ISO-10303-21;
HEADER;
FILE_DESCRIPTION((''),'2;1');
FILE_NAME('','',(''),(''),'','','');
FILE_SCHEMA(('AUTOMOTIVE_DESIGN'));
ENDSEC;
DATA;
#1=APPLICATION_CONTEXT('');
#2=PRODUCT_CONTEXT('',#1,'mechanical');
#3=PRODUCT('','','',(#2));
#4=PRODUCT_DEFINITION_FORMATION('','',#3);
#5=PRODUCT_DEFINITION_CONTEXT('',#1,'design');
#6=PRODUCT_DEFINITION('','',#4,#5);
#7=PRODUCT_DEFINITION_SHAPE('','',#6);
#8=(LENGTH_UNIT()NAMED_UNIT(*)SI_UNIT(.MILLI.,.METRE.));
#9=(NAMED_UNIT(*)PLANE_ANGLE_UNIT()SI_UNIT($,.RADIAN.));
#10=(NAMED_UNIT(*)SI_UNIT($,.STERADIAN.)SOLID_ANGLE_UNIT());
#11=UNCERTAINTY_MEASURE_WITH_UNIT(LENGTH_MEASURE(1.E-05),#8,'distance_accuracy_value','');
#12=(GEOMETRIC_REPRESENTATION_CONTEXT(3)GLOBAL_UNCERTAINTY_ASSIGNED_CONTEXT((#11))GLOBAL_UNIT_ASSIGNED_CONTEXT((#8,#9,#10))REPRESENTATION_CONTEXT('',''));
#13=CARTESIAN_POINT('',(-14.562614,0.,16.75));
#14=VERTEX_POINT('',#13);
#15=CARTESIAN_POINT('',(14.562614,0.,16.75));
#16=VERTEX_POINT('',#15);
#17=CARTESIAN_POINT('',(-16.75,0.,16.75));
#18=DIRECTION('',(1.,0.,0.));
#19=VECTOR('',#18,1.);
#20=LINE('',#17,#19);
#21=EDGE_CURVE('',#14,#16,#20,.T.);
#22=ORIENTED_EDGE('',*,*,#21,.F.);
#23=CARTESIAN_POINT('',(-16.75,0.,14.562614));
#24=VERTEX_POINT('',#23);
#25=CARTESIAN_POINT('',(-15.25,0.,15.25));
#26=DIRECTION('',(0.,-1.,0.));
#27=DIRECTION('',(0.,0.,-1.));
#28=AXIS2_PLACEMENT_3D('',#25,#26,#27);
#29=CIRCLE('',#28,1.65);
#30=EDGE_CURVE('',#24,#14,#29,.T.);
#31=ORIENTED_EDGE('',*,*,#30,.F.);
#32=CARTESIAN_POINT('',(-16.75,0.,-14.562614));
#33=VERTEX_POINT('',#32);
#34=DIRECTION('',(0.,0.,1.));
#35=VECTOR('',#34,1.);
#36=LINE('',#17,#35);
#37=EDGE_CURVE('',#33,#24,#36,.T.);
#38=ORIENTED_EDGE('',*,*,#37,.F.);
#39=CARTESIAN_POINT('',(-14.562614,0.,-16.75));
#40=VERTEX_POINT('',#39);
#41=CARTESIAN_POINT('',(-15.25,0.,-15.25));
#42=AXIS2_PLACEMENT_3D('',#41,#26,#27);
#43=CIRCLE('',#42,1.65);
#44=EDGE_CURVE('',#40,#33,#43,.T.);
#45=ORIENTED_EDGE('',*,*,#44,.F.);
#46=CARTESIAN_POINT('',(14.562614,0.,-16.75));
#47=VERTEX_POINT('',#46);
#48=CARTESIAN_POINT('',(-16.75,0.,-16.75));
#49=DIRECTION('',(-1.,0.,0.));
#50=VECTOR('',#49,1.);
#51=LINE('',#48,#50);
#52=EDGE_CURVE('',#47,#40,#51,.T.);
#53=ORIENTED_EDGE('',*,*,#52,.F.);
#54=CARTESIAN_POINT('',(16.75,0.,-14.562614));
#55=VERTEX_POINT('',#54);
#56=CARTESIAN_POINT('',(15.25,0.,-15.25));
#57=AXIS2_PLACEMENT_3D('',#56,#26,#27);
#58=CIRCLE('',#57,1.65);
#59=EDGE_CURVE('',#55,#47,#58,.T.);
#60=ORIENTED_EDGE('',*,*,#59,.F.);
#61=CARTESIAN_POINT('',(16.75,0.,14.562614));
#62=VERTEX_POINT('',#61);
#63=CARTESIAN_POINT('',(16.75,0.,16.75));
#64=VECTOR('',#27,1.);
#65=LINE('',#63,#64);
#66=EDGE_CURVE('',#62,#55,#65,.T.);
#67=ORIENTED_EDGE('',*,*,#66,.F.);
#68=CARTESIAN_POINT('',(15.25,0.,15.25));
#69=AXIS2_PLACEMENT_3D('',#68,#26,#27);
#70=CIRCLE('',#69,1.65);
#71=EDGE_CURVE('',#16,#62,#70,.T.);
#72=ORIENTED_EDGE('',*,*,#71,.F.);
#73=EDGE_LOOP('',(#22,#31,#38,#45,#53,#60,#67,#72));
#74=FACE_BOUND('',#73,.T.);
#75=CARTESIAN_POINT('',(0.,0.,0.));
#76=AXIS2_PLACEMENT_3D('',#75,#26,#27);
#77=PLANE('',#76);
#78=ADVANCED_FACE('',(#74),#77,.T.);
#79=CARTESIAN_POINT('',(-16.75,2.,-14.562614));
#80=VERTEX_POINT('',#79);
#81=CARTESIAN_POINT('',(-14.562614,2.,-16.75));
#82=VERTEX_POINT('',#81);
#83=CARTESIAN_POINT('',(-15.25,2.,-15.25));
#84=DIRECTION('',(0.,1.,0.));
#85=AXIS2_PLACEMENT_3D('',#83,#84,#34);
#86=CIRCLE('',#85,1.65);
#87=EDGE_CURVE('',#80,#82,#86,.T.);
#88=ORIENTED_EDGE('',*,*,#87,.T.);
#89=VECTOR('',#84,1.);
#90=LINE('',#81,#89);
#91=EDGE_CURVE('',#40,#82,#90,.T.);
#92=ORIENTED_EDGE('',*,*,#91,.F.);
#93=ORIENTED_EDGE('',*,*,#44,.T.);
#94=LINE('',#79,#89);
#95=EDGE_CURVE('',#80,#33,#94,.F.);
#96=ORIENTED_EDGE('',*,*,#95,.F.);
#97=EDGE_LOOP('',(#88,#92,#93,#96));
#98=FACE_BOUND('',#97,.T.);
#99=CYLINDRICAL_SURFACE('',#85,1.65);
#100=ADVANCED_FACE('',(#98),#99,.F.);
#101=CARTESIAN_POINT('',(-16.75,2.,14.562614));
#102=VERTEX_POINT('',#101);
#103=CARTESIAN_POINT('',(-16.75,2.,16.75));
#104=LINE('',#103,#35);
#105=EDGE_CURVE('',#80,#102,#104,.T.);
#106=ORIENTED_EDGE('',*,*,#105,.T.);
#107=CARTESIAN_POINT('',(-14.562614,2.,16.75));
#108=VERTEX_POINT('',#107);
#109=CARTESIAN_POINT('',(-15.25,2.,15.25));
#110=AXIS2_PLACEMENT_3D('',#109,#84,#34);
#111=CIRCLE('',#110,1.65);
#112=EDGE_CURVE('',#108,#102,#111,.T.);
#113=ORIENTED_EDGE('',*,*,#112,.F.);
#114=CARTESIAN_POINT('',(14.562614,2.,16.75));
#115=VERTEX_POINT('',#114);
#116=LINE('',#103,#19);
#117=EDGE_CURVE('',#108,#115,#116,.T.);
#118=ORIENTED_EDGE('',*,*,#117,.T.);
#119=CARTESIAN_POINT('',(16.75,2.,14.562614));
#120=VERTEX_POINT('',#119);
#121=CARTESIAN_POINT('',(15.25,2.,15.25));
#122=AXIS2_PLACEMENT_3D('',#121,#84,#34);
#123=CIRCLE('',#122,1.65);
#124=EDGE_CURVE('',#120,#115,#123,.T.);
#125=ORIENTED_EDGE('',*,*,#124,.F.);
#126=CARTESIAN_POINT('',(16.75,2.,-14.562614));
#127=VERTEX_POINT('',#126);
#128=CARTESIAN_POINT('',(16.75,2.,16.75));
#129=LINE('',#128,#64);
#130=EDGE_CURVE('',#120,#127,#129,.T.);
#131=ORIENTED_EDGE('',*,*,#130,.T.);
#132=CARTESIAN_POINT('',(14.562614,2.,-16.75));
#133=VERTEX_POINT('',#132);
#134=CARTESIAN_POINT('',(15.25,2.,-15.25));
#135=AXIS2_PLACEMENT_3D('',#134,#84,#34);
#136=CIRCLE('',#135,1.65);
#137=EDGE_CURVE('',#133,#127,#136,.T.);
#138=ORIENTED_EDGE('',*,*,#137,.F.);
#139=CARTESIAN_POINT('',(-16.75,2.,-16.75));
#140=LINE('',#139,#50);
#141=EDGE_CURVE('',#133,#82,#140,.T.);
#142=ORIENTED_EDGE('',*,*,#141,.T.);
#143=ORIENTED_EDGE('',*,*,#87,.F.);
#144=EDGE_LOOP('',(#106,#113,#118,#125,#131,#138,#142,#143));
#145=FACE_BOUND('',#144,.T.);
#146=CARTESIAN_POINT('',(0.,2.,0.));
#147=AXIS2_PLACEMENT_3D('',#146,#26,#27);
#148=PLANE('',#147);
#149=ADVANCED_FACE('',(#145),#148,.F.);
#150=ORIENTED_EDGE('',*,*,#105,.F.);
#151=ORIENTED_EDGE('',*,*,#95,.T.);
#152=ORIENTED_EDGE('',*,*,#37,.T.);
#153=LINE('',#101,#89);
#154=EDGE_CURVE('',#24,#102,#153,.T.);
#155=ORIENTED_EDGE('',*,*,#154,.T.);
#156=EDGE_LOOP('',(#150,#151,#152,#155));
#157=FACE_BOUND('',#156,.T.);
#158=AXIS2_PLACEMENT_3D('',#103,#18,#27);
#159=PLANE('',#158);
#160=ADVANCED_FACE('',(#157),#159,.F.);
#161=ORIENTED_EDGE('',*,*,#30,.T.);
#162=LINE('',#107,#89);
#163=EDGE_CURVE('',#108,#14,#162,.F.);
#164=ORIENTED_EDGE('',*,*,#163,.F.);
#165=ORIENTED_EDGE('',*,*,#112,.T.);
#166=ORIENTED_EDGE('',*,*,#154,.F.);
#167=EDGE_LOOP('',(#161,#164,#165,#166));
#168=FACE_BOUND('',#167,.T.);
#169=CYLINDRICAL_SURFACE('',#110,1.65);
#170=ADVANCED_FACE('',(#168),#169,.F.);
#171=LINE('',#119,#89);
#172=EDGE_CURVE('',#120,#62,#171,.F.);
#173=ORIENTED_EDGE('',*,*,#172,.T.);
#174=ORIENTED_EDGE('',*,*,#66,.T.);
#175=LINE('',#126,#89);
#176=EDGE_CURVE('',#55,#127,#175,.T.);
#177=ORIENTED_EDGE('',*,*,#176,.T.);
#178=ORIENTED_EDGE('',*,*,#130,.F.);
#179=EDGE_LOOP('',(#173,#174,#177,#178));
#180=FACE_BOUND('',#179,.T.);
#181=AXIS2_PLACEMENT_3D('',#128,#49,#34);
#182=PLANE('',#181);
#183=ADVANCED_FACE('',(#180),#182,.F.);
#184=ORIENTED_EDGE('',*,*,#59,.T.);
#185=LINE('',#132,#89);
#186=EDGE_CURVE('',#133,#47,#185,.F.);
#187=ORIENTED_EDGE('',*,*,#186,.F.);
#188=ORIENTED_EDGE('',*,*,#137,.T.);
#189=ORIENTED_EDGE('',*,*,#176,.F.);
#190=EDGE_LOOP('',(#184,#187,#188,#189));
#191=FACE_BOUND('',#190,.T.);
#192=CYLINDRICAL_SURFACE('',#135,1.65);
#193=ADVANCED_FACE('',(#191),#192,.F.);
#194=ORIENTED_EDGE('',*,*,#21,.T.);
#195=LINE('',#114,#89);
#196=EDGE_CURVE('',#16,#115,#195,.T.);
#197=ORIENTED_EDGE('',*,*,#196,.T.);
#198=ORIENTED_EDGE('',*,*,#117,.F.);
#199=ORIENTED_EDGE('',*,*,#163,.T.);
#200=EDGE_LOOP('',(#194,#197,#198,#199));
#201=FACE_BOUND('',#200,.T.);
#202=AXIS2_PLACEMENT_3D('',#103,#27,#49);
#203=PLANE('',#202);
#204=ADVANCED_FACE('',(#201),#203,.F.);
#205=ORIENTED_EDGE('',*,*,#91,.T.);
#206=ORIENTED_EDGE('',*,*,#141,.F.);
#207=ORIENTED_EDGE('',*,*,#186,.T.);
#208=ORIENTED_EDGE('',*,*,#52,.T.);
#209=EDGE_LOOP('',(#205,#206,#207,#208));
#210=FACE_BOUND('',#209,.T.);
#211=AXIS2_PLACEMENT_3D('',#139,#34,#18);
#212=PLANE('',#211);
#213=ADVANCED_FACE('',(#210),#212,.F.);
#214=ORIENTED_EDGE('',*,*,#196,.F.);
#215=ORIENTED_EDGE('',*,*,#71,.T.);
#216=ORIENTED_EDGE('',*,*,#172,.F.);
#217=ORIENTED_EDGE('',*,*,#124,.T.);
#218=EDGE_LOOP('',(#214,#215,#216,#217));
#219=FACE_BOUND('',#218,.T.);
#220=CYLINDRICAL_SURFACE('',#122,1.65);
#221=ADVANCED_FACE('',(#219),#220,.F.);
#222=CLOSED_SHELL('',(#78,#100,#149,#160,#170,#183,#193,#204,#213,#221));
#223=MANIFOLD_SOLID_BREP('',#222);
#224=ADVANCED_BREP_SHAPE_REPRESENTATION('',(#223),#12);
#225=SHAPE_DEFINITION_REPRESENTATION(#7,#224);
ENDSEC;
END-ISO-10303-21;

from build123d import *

# Parameters (mm, degrees)
SKETCH2_W             = 33.5
SKETCH2_H             = 33.5
BOSS_EXTRUDE1_DEPTH   = 2
M4_TAPPED_HOLE1_DEPTH = 2


# Read off the part's stored shape, not the designer's step: M4 Tapped Hole1
with BuildPart() as part:
    # Sketch2 → Boss-Extrude1 (new body)
    with BuildSketch(Plane(origin=(0, 0, 0), x_dir=(1, 0, 0), z_dir=(0, 1, 0))):
        Rectangle(SKETCH2_W, SKETCH2_H)
    extrude(amount=BOSS_EXTRUDE1_DEPTH)

    # M4 Tapped Hole1 outline → M4 Tapped Hole1 (cut)
    with BuildSketch(Plane(origin=(0, 0, 0), x_dir=(1, 0, 0), z_dir=(0, 1, 0))):
        with BuildLine():
            Line((16.75, -16.75), (16.75, -14.562613646))
            ThreePointArc((16.75, -14.562613646), (14.083273811, -14.083273811), (14.562613646, -16.75))
            Line((14.562613646, -16.75), (16.75, -16.75))
        make_face()
        with BuildLine():
            ThreePointArc((14.562613646, 16.75), (14.083273811, 14.083273811), (16.75, 14.562613646))
            Line((16.75, 14.562613646), (16.75, 16.75))
            Line((16.75, 16.75), (14.562613646, 16.75))
        make_face()
        with BuildLine():
            Line((-16.75, -16.75), (-14.562613646, -16.75))
            ThreePointArc((-14.562613646, -16.75), (-14.083273811, -14.083273811), (-16.75, -14.562613646))
            Line((-16.75, -14.562613646), (-16.75, -16.75))
        make_face()
        with BuildLine():
            ThreePointArc((-16.75, 14.562613646), (-14.083273811, 14.083273811), (-14.562613646, 16.75))
            Line((-14.562613646, 16.75), (-16.75, 16.75))
            Line((-16.75, 16.75), (-16.75, 14.562613646))
        make_face()
    extrude(amount=M4_TAPPED_HOLE1_DEPTH, mode=Mode.SUBTRACT)


solid = part.part
